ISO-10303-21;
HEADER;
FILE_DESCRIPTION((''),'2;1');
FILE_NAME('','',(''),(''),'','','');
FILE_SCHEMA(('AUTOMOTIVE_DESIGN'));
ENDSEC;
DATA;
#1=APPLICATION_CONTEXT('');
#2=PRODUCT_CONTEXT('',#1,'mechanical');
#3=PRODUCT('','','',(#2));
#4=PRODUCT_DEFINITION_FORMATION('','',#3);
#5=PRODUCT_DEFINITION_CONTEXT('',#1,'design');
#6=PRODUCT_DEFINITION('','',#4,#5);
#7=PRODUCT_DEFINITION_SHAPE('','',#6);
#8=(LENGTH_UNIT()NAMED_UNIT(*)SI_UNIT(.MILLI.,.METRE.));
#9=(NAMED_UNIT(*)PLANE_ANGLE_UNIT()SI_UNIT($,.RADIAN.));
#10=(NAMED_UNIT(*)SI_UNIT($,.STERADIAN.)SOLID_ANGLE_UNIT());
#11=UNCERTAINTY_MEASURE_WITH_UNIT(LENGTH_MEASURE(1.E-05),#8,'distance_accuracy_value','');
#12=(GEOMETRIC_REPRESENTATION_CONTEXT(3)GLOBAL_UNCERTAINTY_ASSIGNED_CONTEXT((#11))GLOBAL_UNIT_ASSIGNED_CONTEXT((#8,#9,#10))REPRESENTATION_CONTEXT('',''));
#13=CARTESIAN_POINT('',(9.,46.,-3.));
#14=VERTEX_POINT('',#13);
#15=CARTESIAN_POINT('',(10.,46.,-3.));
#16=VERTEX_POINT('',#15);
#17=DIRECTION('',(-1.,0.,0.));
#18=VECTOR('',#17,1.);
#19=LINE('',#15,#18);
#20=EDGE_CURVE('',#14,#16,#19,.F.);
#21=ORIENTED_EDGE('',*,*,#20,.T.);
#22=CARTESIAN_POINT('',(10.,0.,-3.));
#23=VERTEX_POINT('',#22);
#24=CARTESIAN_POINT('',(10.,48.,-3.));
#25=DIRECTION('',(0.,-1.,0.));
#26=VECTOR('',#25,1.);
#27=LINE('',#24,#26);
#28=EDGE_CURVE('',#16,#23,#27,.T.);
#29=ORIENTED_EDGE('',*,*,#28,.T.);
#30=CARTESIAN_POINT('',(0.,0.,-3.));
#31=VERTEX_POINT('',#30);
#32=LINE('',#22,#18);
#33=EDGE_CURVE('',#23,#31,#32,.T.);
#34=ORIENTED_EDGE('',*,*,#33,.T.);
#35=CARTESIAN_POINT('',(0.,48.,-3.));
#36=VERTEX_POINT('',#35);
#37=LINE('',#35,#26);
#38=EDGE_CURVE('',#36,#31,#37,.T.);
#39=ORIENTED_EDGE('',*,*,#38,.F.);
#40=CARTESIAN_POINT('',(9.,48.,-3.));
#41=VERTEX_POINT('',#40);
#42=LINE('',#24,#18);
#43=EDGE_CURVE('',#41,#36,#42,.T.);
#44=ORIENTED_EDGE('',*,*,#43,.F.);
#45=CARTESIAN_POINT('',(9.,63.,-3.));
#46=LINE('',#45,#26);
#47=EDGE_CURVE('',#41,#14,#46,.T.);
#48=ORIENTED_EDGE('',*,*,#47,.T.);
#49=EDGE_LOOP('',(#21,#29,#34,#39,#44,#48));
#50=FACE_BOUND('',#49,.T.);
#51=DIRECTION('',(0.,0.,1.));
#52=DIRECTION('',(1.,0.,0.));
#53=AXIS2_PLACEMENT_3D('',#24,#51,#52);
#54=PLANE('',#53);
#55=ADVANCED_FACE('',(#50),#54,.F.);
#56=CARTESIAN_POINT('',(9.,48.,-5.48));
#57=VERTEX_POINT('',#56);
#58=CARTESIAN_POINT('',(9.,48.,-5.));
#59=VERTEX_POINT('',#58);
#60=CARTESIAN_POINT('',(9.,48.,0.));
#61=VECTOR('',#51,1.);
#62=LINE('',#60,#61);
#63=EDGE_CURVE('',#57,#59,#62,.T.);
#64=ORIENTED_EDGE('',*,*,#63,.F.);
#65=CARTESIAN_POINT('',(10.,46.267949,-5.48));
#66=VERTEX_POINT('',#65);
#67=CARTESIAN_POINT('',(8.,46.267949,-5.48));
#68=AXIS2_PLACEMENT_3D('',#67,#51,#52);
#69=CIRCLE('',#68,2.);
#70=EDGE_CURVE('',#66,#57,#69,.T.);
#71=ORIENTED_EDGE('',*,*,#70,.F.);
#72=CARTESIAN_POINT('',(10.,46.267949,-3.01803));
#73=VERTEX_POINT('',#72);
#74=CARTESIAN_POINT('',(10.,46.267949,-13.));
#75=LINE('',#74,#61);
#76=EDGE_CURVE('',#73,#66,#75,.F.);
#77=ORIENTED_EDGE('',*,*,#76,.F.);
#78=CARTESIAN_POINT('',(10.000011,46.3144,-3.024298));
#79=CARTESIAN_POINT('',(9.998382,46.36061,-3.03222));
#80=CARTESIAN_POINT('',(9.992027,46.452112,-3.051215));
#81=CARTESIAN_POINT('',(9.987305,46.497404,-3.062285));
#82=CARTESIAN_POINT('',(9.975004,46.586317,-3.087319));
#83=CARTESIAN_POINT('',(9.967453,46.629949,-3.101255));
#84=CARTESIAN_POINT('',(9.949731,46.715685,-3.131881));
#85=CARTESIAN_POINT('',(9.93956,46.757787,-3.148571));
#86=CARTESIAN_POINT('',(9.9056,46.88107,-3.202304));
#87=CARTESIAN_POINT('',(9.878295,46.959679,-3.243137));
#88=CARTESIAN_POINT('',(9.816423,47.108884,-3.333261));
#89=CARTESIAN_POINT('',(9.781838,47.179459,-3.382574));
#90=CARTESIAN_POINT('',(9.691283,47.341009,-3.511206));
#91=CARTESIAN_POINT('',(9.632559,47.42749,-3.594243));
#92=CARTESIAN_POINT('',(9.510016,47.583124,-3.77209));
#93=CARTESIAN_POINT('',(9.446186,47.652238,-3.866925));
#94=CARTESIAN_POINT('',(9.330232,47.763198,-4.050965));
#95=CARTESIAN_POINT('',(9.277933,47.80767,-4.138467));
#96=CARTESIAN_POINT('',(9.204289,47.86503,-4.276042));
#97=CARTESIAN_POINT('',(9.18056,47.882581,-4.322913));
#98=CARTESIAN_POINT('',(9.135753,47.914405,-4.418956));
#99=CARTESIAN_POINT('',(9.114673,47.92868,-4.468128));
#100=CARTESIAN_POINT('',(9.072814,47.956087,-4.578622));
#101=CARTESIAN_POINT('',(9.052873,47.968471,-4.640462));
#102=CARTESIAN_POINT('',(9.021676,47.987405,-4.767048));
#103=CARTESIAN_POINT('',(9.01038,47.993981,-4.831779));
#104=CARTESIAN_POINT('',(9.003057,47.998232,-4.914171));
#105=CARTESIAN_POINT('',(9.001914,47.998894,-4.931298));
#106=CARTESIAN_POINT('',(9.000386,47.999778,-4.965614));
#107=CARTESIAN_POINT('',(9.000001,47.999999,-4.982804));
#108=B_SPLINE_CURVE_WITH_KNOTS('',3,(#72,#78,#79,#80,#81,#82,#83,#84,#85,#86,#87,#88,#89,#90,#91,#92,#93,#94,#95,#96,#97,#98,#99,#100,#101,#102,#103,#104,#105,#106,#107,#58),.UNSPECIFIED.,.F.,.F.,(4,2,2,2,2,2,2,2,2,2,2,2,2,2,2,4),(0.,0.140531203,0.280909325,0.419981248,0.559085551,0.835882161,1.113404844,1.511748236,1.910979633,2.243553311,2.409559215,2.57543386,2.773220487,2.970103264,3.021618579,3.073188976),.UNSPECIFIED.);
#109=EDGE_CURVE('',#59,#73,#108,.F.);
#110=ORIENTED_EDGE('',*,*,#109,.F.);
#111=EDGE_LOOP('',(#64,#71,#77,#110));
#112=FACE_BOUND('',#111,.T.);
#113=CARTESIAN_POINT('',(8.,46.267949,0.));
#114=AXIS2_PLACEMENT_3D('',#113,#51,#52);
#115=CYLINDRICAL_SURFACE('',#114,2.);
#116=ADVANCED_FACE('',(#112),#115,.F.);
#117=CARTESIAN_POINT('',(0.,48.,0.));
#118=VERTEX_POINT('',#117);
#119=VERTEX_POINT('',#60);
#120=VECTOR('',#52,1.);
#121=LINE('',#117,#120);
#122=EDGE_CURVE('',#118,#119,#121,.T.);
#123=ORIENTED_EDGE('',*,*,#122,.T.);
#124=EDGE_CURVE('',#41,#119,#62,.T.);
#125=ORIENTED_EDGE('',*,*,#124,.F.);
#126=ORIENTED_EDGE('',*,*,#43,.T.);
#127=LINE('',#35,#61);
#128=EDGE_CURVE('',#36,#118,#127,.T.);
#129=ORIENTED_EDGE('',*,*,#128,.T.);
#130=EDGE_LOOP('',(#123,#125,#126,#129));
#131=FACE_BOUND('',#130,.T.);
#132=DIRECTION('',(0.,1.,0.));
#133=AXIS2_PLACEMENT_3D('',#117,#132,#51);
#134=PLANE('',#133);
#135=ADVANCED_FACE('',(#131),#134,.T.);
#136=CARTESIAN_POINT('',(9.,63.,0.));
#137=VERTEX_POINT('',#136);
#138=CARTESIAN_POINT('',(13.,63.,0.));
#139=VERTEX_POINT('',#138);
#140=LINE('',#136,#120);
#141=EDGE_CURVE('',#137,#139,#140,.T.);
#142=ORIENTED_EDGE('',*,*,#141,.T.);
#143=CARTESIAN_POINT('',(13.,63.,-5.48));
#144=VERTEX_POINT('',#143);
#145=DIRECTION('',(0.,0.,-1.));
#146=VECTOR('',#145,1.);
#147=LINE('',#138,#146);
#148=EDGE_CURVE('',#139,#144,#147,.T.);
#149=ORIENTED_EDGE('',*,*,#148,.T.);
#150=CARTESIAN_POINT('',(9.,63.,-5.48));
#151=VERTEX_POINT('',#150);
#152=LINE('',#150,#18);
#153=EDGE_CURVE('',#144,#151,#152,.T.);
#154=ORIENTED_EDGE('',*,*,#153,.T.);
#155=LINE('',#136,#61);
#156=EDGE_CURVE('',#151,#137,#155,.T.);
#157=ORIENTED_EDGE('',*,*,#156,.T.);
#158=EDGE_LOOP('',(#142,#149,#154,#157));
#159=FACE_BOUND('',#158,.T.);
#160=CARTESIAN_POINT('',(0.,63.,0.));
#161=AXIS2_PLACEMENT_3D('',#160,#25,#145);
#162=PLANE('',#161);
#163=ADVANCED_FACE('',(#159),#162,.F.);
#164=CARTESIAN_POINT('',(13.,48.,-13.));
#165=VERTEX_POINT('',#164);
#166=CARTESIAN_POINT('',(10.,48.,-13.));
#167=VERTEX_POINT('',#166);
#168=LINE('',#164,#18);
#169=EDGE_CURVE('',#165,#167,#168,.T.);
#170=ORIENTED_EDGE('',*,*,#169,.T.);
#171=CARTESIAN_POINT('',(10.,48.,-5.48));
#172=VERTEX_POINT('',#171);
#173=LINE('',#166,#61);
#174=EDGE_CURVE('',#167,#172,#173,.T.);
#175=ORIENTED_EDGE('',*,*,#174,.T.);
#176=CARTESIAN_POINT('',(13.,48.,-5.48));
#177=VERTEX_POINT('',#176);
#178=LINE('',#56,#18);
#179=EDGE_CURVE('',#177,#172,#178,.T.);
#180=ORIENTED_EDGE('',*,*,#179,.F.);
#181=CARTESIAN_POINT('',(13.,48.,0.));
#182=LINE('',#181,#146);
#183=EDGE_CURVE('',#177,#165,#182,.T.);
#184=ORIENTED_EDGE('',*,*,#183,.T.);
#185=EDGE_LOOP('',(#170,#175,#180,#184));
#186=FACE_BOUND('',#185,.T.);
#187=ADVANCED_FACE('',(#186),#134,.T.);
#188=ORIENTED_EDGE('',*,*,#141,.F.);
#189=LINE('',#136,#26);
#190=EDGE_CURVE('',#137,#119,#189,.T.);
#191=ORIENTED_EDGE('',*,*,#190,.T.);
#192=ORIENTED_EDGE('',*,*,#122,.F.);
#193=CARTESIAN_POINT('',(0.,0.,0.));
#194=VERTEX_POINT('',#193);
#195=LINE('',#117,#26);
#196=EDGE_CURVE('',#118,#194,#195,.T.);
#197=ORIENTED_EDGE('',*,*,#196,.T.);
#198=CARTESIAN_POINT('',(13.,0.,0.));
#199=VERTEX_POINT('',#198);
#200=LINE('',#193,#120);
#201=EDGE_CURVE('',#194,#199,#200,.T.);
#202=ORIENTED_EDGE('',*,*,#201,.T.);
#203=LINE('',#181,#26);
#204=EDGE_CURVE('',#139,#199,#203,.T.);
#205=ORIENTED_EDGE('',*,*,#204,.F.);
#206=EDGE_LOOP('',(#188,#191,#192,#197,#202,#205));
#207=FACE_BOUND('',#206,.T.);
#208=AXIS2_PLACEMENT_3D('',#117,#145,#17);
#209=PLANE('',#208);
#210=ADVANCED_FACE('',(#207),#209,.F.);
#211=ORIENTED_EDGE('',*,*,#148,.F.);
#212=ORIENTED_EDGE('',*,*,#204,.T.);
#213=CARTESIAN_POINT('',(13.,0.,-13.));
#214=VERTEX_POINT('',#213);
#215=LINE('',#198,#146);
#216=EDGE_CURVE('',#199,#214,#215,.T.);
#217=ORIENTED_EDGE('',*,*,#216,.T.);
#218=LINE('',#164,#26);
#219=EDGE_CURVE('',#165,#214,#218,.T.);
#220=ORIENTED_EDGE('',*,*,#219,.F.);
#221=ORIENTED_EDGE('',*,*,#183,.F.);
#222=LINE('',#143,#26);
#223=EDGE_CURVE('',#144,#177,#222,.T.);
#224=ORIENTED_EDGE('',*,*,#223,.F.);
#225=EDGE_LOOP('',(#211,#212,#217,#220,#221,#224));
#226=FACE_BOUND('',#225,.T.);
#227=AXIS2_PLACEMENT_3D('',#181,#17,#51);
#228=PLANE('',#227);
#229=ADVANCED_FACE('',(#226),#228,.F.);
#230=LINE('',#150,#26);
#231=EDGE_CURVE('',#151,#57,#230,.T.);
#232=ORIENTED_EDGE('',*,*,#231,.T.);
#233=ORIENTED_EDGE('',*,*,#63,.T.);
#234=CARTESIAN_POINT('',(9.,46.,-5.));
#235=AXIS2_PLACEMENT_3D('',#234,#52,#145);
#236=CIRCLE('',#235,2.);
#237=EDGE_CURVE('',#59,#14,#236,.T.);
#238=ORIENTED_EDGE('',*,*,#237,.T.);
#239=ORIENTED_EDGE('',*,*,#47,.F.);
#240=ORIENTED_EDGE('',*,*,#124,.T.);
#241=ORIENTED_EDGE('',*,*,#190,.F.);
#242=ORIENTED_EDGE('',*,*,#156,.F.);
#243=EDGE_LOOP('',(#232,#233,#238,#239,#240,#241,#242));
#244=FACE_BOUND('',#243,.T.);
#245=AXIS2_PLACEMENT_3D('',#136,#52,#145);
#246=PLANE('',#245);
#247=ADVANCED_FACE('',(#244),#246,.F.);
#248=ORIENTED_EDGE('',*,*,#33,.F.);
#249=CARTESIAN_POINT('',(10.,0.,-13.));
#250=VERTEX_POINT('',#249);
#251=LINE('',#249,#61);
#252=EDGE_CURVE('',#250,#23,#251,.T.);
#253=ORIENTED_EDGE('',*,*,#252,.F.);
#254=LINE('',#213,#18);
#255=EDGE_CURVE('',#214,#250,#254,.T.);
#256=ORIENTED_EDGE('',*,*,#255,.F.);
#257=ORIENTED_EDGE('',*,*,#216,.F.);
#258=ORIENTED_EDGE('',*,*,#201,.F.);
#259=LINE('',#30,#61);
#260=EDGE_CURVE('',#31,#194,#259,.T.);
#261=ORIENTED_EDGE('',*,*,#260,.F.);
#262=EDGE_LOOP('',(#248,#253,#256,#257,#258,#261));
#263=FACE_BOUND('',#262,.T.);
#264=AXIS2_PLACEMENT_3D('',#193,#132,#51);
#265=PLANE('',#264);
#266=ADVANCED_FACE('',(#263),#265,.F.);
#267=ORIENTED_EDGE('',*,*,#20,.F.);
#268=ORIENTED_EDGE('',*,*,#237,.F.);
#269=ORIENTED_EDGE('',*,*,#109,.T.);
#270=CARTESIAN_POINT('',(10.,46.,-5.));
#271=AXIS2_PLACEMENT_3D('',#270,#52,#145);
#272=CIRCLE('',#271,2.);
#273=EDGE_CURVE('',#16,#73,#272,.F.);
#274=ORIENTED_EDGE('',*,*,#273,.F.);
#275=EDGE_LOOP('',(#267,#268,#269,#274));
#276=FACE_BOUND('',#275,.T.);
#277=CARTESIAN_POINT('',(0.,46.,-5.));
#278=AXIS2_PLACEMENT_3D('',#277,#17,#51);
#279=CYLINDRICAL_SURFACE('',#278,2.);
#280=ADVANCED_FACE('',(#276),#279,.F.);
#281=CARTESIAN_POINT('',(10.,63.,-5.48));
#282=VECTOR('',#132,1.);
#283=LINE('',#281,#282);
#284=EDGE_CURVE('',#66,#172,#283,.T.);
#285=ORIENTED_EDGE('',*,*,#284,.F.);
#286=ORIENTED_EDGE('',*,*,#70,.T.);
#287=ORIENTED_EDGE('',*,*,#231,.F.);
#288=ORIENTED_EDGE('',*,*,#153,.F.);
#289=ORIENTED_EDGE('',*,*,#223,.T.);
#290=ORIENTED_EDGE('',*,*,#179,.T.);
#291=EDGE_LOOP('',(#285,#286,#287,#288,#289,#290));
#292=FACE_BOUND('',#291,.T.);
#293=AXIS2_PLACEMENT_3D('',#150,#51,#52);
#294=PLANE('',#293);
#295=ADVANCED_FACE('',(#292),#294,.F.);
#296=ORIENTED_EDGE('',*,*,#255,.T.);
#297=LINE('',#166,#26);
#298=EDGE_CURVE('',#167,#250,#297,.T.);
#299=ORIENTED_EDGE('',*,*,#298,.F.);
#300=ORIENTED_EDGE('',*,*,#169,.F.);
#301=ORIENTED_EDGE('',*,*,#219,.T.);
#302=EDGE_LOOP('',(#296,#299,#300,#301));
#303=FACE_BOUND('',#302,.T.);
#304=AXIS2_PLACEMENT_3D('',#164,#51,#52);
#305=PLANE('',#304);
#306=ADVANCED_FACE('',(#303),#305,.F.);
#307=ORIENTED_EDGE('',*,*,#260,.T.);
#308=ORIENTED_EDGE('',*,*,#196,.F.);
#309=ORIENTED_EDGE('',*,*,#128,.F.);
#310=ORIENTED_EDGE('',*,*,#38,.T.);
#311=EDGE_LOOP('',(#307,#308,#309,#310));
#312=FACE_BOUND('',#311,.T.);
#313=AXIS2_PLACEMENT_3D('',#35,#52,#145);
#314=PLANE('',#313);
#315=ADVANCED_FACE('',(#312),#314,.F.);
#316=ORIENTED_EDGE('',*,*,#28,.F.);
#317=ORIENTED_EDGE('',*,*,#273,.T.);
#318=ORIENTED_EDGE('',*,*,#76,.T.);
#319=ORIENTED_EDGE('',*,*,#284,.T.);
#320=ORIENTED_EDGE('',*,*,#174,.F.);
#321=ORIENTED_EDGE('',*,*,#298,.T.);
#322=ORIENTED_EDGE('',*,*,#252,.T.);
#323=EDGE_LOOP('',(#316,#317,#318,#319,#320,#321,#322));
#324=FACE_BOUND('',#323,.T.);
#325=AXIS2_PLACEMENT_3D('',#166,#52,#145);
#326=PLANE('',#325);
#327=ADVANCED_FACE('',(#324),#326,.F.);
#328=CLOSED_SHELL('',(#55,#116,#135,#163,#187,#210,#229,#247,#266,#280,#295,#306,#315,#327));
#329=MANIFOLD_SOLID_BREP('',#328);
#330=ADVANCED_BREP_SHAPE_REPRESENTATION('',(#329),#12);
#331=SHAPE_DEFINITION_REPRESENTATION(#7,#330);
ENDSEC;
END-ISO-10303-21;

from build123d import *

# Parameters (mm, degrees)
SALIENTE_EXTRUIR1_DEPTH = 48
CROQUIS3_W              = 4
CROQUIS3_H              = 5.48
SALIENTE_EXTRUIR3_DEPTH = 15
REDONDEO1_R             = 2


with BuildPart() as part:
    # Croquis1 → Saliente-Extruir1 (new body)
    with BuildSketch(Plane(origin=(0, 0, 0), x_dir=(1, 0, 0), z_dir=(0, 1, 0))):
        Polygon((0, 0), (13, 0), (13, 13), (10, 13), (10, 3), (0, 3), align=None)
    extrude(amount=SALIENTE_EXTRUIR1_DEPTH)

    # Croquis3 → Saliente-Extruir3 (add)
    with BuildSketch(Plane(origin=(0, 48, 0), x_dir=(1, 0, 0), z_dir=(0, 1, 0))):
        with Locations((11, 2.74)):
            Rectangle(CROQUIS3_W, CROQUIS3_H)
    extrude(amount=SALIENTE_EXTRUIR3_DEPTH)

    # Redondeo1
    # the kernel refuses this fillet: 2 mm, written as the material it adds along each edge
    with BuildSketch(Plane(origin=(15, 48, -3), x_dir=(0, -1, 0), z_dir=(-1, 0, 0))) as redondeo1_piece_1_section:
        with BuildLine():
            CenterArc((REDONDEO1_R, -REDONDEO1_R), REDONDEO1_R, 90, 90)
            Line((0, -REDONDEO1_R), (0, 0))
            Line((0, 0), (REDONDEO1_R, 0))
        make_face()
    redondeo1_piece_1 = extrude(amount=6, mode=Mode.PRIVATE)
    redondeo1_piece_1 = split(redondeo1_piece_1, bisect_by=Plane(origin=(13, 47.553264122, -3.446735878), z_dir=(-1, 0, 0)), keep=Keep.TOP, mode=Mode.PRIVATE)
    add(redondeo1_piece_1)
    with BuildSketch(Plane(origin=(10, 48, -5.48), x_dir=(-1, 0, 0), z_dir=(0, 0, 1))) as redondeo1_piece_2:
        with BuildLine():
            CenterArc((2, 1.732050808), REDONDEO1_R, 180, 60)
            Line((0, 1.732050808), (0, 0))
            Line((0, 0), (1, 0))
        make_face()
    extrude(amount=2.48)


solid = part.part
